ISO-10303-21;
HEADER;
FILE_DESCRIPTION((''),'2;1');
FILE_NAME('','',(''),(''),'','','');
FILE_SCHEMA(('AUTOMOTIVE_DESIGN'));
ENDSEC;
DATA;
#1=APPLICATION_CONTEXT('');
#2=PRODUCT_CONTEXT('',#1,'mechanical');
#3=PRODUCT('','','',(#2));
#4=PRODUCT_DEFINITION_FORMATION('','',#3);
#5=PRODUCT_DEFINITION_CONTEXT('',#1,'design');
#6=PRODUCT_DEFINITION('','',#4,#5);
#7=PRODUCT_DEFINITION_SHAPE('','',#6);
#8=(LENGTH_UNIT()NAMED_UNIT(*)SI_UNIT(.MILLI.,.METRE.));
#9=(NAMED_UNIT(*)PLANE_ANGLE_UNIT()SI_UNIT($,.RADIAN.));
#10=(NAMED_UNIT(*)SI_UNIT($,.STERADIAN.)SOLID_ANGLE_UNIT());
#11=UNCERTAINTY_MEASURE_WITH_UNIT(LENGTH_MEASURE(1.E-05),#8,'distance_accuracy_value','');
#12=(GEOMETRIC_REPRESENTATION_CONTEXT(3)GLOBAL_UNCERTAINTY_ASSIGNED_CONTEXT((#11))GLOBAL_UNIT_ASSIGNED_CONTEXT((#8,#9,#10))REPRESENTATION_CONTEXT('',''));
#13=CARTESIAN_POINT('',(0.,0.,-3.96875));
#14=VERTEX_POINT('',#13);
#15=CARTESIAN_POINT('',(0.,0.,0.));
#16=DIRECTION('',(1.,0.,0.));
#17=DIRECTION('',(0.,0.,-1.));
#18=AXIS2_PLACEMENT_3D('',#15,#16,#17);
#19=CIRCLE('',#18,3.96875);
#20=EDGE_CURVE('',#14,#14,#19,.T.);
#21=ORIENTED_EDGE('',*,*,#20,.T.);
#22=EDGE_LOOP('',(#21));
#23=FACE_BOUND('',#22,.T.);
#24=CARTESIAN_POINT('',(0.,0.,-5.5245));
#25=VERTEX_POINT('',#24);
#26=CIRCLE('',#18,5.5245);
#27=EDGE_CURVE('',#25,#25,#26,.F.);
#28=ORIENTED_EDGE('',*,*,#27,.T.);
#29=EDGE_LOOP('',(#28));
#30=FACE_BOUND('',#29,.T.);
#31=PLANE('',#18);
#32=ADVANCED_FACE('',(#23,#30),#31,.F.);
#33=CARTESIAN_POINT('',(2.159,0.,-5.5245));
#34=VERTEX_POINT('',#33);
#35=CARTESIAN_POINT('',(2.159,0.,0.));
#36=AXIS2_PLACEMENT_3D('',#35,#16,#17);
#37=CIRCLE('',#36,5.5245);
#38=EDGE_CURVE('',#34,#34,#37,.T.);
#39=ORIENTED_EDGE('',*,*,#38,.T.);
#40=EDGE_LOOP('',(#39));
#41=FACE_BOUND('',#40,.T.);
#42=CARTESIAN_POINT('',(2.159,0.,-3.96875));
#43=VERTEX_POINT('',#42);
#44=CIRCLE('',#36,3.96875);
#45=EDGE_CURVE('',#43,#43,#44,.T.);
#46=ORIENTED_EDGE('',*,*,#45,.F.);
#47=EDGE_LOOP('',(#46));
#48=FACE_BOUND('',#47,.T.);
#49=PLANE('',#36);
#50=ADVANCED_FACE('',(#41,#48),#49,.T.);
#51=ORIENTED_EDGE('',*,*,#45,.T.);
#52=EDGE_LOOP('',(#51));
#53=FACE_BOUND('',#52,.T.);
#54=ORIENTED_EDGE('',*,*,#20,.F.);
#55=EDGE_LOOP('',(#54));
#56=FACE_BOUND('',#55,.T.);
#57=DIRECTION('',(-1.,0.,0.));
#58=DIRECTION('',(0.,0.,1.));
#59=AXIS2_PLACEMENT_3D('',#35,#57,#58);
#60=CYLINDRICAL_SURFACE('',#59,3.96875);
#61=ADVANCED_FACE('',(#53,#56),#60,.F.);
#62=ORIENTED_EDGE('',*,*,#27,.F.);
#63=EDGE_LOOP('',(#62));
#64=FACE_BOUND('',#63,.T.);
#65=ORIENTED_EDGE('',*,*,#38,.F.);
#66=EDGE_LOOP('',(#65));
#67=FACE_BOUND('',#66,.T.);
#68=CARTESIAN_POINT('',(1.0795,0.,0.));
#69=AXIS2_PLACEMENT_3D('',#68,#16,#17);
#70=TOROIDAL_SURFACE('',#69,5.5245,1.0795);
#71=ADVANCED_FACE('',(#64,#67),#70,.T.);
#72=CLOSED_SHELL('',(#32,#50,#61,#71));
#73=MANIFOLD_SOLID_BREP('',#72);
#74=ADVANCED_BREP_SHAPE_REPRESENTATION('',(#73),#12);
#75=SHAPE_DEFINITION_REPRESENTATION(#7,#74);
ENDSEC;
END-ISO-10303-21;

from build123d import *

# Parameters (mm, degrees)
SKETCH1_R           = 6.604
SKETCH1_R_2         = 3.96875
BOSS_EXTRUDE1_DEPTH = 2.159
FILLET1_R           = 1.0795


with BuildPart() as part:
    # Sketch1 → Boss-Extrude1 (new body)
    with BuildSketch(Plane(origin=(0, 0, 0), x_dir=(0, 0, -1), z_dir=(1, 0, 0))):
        Circle(SKETCH1_R)
        Circle(SKETCH1_R_2, mode=Mode.SUBTRACT)
    extrude(amount=BOSS_EXTRUDE1_DEPTH)

    # Fillet1
    fillet1_edges = [part.edges().sort_by_distance(p)[0] for p in [
        (0, 0, 6.604),
        (2.159, 0, 6.604),
    ]]
    fillet(fillet1_edges, radius=FILLET1_R - 0.0001)  # a hair under: the kernel refuses the full size


solid = part.part
